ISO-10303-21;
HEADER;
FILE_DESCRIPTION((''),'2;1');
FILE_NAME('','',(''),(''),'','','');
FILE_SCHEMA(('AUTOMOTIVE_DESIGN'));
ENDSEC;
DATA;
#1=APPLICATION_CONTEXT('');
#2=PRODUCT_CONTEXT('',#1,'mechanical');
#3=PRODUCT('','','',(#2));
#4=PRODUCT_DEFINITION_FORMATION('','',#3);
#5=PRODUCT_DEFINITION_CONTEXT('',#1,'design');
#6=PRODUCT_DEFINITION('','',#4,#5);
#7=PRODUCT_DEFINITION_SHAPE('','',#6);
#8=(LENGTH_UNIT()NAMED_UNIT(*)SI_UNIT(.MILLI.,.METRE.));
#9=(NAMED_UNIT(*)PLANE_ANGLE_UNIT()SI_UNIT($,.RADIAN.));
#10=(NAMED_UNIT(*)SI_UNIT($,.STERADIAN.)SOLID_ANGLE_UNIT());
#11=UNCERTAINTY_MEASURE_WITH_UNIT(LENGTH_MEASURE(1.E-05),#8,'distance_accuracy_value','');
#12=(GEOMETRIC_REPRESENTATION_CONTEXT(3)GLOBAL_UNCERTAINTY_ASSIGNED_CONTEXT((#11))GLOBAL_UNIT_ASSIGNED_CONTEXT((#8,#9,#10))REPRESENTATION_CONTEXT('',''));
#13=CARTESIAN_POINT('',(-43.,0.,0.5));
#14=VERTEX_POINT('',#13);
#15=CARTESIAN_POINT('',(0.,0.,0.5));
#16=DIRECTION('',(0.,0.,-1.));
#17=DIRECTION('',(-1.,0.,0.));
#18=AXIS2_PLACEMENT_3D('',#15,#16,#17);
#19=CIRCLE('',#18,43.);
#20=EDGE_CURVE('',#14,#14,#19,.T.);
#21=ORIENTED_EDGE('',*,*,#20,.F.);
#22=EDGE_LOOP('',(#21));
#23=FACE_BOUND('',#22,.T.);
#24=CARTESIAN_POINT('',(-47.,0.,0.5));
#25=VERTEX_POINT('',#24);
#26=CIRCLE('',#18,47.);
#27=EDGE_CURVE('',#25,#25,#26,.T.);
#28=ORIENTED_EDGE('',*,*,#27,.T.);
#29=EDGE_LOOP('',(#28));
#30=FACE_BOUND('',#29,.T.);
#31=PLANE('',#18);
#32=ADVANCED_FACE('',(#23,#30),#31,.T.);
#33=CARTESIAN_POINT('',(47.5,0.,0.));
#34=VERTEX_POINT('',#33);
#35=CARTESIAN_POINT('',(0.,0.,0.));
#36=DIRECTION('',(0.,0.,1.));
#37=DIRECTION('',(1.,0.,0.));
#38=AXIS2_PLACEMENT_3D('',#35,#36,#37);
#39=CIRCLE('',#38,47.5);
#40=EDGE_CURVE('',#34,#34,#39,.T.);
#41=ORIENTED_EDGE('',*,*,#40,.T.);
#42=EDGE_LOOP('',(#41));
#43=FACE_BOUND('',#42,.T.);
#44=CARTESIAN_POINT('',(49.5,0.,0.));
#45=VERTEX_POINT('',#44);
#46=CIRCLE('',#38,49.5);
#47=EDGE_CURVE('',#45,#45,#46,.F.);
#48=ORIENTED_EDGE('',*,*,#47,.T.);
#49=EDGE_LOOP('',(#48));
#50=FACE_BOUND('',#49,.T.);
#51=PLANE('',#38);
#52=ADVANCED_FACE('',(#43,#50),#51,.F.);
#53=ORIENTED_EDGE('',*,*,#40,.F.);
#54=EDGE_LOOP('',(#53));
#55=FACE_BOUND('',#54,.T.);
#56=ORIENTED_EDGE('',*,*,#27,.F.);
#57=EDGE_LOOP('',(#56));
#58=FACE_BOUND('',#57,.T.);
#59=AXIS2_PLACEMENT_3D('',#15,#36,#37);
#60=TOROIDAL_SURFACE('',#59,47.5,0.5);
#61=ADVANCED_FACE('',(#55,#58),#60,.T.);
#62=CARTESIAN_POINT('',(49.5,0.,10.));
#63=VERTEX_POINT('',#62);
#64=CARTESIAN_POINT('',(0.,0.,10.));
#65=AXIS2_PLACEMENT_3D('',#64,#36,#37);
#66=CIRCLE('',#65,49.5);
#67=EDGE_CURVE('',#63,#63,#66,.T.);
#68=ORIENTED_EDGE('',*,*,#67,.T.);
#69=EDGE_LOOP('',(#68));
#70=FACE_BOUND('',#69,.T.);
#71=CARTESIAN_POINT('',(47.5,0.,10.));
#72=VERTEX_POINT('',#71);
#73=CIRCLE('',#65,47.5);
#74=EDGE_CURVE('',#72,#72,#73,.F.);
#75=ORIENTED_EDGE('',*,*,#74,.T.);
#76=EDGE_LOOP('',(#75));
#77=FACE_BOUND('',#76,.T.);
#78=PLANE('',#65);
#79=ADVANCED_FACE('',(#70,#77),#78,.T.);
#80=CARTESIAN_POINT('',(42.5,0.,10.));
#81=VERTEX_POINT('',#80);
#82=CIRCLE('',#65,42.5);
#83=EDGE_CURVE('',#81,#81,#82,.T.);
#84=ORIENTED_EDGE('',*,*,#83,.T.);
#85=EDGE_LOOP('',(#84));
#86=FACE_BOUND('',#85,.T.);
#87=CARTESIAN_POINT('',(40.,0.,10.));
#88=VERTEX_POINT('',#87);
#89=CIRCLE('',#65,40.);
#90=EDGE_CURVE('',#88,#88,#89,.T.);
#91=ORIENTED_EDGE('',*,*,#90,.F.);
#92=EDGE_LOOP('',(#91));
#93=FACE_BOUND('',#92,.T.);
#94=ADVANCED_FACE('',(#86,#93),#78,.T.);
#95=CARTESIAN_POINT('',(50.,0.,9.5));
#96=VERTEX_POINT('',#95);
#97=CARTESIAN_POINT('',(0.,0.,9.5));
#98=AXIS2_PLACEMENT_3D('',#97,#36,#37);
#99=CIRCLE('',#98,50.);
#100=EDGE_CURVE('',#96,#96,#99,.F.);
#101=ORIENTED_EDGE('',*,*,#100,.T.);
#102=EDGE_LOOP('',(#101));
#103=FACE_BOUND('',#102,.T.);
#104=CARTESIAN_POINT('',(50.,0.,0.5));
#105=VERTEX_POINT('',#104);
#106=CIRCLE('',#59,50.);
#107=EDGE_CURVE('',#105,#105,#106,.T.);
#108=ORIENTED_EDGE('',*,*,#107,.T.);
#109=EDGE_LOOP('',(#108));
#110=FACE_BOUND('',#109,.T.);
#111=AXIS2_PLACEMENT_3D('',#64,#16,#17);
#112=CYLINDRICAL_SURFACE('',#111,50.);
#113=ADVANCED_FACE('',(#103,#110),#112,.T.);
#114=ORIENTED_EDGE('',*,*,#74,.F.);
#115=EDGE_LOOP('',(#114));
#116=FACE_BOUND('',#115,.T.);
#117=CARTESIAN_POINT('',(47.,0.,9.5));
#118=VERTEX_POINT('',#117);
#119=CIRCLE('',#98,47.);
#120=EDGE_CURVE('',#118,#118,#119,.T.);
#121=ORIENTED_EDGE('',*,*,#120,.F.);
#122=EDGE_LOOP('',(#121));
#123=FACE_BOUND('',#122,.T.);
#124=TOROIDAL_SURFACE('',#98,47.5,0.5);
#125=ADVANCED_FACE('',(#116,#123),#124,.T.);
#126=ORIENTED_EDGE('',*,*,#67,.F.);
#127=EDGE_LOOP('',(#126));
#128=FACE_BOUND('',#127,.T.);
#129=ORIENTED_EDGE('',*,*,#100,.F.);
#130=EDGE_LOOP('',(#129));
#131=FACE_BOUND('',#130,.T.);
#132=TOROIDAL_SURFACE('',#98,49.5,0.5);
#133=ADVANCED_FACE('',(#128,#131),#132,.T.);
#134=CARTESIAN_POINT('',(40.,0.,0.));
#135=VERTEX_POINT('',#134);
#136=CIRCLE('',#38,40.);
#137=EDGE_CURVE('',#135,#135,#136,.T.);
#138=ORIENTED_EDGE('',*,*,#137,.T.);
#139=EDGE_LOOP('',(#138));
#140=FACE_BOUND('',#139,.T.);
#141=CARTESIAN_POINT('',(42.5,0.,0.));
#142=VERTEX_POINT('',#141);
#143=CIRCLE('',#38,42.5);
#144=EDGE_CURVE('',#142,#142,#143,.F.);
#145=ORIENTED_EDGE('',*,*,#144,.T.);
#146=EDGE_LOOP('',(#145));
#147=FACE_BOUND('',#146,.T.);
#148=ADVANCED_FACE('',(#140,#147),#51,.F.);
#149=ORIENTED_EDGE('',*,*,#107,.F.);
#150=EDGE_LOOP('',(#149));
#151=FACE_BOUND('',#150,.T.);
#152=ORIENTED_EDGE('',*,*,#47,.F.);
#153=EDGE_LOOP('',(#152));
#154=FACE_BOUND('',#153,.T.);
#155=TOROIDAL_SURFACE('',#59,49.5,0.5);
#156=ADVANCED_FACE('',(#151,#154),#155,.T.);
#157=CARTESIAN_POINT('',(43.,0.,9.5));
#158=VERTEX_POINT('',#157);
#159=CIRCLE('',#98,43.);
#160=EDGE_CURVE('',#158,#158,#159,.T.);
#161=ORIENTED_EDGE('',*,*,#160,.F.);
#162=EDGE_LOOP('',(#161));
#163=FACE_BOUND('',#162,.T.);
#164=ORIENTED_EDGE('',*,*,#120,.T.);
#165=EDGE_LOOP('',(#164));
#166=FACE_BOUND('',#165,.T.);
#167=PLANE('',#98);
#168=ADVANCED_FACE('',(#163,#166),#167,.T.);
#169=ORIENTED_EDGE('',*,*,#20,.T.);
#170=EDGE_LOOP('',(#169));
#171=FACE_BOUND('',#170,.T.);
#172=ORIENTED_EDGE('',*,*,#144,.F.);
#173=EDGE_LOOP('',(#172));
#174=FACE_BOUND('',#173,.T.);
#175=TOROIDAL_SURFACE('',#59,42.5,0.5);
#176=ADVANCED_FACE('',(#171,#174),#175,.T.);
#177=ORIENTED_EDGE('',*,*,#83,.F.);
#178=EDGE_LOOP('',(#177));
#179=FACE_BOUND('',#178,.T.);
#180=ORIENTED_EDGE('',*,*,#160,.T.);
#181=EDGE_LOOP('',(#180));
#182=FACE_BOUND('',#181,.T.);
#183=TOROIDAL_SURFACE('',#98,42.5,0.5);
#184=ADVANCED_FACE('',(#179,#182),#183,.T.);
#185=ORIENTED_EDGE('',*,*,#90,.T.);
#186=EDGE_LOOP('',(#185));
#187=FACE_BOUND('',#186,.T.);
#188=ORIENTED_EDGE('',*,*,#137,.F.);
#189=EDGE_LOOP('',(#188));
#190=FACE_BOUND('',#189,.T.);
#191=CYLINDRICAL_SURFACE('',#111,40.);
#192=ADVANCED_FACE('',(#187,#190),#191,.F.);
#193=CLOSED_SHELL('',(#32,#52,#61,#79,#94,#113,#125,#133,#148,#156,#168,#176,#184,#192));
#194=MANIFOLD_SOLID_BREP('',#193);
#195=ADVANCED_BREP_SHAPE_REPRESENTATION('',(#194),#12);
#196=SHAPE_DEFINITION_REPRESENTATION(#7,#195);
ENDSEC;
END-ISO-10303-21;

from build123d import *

# Parameters (mm, degrees)
SKETCH1_R           = 50
SKETCH1_R_2         = 40
BOSS_EXTRUDE1_DEPTH = 10
SKETCH2_R           = 47
SKETCH2_R_2         = 43
CUT_EXTRUDE1_DEPTH  = 0.5
CUT_EXTRUDE2_START  = -0.5
SKETCH3_R           = 47
SKETCH3_R_2         = 43
CUT_EXTRUDE2_DEPTH  = 0.5
FILLET1_R           = 0.5


with BuildPart() as part:
    # Sketch1 → Boss-Extrude1 (new body)
    with BuildSketch(Plane.XY):
        Circle(SKETCH1_R)
        Circle(SKETCH1_R_2, mode=Mode.SUBTRACT)
    extrude(amount=BOSS_EXTRUDE1_DEPTH)

    # Sketch2 → Cut-Extrude1 (cut)
    with BuildSketch(Plane.XY.offset(10)):
        Circle(SKETCH2_R)
        Circle(SKETCH2_R_2, mode=Mode.SUBTRACT)
    extrude(amount=-CUT_EXTRUDE1_DEPTH, mode=Mode.SUBTRACT)

    # Sketch3 → Cut-Extrude2 (cut)
    with BuildSketch(Plane(origin=(0, 0, 0), x_dir=(-1, 0, 0), z_dir=(0, 0, -1)).offset(CUT_EXTRUDE2_START)):
        with Locations(Location((0, 0, 0), (0, 0, 180))):
            Circle(SKETCH3_R)
        with Locations(Location((0, 0, 0), (0, 0, 180))):
            Circle(SKETCH3_R_2, mode=Mode.SUBTRACT)
    extrude(amount=CUT_EXTRUDE2_DEPTH, mode=Mode.SUBTRACT)

    # Fillet1
    fillet1_edges = [part.edges().sort_by_distance(p)[0] for p in [
        (-47, 0, 10),
        (-43, 0, 10),
        (-47, 0, 0),
        (-50, 0, 0),
        (-43, 0, 0),
        (-50, 0, 10),
    ]]
    fillet(fillet1_edges, radius=FILLET1_R - 0.0001)  # a hair under: the kernel refuses the full size


solid = part.part
